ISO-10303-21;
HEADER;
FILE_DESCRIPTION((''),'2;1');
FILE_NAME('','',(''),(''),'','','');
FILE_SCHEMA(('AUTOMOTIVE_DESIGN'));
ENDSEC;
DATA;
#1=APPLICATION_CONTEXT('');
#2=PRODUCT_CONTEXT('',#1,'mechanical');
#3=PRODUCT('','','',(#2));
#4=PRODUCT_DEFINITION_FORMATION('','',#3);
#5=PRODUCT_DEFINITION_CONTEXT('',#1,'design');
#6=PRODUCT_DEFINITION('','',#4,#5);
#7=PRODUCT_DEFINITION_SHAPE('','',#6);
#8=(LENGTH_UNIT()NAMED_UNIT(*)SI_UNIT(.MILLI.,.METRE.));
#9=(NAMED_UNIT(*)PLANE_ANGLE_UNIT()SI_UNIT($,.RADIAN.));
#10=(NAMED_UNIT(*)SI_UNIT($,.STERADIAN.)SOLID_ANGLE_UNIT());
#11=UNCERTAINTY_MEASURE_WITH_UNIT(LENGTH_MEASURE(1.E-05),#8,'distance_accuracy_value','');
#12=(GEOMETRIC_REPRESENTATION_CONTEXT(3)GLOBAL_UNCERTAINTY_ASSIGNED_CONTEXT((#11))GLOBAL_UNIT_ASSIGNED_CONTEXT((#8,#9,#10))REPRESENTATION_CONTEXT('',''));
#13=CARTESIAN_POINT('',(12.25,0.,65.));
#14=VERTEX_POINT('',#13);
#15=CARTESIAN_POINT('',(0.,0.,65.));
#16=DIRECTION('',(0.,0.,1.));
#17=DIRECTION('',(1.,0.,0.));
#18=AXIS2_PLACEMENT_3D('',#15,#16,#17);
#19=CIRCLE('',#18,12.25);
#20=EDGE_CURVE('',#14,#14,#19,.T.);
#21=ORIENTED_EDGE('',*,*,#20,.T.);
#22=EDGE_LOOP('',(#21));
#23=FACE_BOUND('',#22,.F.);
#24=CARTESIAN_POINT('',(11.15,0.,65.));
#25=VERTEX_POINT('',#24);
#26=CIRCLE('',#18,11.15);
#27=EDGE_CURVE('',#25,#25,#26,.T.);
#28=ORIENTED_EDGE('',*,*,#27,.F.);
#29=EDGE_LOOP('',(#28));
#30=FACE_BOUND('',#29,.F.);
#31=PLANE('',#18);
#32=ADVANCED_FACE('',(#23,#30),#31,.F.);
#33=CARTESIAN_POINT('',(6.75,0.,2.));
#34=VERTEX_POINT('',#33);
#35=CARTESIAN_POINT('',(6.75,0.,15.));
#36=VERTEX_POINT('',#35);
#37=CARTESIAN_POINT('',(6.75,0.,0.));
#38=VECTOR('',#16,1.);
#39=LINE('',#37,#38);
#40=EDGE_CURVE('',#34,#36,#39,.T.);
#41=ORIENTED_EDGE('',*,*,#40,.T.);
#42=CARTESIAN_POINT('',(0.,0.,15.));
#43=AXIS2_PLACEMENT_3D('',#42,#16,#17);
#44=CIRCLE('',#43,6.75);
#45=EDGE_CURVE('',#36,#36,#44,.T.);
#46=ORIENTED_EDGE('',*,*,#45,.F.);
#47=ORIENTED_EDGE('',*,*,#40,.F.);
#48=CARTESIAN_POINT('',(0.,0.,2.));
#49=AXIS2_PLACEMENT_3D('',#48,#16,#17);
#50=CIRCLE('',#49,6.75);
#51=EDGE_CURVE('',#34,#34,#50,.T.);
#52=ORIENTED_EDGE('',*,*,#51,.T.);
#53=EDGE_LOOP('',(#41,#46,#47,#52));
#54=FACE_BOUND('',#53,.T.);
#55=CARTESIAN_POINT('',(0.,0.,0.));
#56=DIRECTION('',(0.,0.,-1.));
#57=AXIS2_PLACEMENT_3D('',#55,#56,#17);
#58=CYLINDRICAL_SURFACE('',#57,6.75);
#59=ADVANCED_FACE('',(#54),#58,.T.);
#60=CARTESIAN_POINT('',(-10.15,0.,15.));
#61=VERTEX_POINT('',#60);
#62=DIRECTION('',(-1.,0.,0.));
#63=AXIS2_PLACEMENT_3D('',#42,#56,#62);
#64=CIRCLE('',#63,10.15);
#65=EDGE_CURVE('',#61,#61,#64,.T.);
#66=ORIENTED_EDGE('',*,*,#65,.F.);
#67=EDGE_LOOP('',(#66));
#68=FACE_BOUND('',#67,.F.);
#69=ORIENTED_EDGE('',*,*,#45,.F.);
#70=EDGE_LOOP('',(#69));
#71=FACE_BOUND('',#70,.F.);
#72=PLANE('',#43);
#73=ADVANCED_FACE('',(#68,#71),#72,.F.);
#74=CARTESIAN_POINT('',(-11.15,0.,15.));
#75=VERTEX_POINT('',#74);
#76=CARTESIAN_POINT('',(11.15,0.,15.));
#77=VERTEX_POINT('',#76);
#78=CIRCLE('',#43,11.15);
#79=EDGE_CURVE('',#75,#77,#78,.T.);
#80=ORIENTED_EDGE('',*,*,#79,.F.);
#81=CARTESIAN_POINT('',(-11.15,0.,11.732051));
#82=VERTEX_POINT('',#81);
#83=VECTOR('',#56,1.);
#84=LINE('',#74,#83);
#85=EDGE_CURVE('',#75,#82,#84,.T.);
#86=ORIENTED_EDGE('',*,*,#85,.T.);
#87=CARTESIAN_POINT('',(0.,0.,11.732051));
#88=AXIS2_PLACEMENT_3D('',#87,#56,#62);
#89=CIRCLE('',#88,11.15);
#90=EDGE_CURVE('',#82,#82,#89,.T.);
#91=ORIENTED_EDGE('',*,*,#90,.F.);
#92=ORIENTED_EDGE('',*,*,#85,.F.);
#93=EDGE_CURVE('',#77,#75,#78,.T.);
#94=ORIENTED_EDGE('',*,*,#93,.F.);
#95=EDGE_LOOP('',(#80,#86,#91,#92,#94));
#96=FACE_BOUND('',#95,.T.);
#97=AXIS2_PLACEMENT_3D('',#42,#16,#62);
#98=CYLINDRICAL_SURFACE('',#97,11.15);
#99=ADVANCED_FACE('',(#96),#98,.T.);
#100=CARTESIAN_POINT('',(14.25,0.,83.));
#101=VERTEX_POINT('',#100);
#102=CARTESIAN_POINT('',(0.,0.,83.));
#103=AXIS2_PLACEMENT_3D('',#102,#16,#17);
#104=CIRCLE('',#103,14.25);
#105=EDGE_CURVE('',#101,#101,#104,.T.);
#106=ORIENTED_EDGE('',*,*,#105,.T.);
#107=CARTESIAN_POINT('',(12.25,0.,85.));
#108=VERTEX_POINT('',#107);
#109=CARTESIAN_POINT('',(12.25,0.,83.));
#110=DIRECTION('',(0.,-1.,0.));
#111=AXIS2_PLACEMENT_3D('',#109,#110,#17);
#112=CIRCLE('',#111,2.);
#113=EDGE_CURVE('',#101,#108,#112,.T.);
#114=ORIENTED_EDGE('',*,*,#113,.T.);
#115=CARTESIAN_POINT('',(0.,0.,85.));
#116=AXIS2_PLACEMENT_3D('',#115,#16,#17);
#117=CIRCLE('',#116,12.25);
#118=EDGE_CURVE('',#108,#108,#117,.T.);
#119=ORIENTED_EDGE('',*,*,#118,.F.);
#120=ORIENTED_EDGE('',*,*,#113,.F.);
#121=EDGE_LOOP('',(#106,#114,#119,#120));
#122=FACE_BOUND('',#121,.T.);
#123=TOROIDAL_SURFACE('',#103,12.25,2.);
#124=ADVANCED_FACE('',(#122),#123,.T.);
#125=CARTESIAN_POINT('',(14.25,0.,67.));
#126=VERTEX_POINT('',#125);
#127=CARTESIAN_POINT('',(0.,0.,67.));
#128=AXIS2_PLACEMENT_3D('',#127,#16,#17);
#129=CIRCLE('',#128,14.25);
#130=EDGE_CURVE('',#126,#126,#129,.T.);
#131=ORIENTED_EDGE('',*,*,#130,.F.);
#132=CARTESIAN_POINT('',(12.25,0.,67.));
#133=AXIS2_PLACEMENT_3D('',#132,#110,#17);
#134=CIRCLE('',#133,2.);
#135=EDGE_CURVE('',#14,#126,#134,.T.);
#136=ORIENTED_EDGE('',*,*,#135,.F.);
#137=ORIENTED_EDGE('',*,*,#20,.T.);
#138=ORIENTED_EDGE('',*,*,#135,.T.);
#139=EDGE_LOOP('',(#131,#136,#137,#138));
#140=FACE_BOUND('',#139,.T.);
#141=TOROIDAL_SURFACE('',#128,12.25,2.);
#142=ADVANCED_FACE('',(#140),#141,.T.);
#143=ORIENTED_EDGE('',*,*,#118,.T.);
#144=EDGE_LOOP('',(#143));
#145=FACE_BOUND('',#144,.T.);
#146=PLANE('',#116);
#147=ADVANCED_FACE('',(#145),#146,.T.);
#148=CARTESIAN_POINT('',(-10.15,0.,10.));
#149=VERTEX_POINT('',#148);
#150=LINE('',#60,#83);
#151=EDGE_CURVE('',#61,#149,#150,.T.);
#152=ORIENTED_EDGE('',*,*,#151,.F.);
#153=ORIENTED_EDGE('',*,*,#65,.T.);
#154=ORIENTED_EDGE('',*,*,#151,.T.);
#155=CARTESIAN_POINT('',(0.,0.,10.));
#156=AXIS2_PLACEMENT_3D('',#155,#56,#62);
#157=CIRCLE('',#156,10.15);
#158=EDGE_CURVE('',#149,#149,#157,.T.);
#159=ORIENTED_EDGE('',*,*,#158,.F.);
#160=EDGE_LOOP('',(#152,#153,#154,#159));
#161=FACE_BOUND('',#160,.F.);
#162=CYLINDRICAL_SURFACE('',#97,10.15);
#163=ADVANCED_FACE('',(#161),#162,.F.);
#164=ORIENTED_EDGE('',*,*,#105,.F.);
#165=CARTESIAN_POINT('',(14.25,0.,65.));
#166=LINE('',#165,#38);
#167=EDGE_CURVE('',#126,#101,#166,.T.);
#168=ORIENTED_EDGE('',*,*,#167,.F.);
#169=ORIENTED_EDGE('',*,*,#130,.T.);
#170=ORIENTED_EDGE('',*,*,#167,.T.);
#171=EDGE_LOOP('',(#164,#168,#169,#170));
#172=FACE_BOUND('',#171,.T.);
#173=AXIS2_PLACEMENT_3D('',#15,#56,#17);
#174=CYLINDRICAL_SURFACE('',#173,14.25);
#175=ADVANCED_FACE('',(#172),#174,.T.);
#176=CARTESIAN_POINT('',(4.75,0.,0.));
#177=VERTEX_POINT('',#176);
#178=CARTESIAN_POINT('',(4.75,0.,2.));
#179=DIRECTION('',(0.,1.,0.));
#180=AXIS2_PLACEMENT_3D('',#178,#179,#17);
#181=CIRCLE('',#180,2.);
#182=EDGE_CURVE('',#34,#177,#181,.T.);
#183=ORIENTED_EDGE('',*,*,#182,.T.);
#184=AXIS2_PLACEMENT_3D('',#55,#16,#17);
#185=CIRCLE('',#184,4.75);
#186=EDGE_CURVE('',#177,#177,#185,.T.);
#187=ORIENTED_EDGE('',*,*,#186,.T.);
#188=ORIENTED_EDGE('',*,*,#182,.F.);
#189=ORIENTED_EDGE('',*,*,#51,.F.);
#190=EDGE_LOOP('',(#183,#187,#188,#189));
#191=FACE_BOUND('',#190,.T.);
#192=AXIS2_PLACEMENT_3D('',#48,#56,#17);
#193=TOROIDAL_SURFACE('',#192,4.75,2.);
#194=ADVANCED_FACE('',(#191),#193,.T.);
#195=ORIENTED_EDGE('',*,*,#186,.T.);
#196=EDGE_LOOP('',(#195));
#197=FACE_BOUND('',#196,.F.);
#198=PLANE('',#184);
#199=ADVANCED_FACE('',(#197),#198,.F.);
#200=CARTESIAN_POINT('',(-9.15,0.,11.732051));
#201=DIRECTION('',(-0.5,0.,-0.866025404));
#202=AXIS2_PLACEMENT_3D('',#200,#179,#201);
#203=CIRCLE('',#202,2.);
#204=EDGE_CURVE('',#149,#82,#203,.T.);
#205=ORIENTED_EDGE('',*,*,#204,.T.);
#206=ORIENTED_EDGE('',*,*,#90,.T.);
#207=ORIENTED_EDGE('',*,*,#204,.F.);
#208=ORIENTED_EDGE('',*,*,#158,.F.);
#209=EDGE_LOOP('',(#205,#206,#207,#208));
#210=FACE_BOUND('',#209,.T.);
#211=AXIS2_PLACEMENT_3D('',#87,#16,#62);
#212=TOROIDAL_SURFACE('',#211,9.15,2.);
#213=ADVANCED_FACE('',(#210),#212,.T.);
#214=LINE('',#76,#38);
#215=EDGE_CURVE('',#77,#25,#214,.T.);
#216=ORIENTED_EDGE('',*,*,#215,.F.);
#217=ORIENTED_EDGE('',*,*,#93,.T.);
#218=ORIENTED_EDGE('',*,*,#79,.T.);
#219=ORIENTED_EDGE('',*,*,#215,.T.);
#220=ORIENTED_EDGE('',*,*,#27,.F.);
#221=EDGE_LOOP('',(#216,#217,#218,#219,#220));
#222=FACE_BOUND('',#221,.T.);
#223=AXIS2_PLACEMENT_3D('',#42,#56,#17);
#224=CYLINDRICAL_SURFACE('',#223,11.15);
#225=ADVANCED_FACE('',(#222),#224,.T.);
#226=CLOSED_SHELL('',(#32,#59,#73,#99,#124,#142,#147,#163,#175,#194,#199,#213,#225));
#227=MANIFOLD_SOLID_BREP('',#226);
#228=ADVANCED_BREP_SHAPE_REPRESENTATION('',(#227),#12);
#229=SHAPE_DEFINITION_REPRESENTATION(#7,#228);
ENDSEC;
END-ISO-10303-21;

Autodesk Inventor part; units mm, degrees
ref_plane "YZ Plane" through (0, 0, 0) normal (1, 0, 0) x (0, 1, 0)
ref_plane "XZ Plane" through (0, 0, 0) normal (0, 1, 0) x (-1, 0, 0)
ref_plane "XY Plane" through (0, 0, 0) normal (0, 0, 1) x (1, 0, 0)
sketch "Sketch1" plane through (0, 0, 0) normal (0, 0, 1) x (1, 0, 0)
  circle A0 centre (0, 0) radius 6.75
  dimension "d0" = 13.5
extrude "Extrusion1" add sketch "Sketch1" along normal blind 15
sketch "Sketch2" plane through (0, 0, 15) normal (0, 0, 1) x (1, 0, 0)
  circle A0 centre (0, 0) radius 11.15
  dimension "d3" = 22.3
extrude "Extrusion3" add sketch "Sketch2" along normal blind 50
sketch "Sketch3" plane through (0, 0, 15) normal (0, 0, -1) x (-1, 0, 0)
  circle A0 centre (0, 0) radius 10.15
  circle A1 centre (0, 0) radius 11.15
  dimension "d8" = 20.3
  dimension "d9" = 22.3
extrude "Extrusion4" add sketch "Sketch3" along normal blind 5
sketch "Sketch4" plane through (0, 0, 65) normal (0, 0, 1) x (1, 0, 0)
  circle A0 centre (0, 0) radius 14.25
  dimension "d12" = 28.5
extrude "Extrusion5" add sketch "Sketch4" along normal blind 20
fillet "Fillet1" radius 2 1 edges at (-14.25, 0, 85)
fillet "Fillet2" radius 2 1 edges at (-6.75, 0, 0)
fillet "Fillet3" radius 2 1 edges at (11.15, 0, 10)
fillet "Fillet4" radius 2 1 edges at (-14.25, 0, 65)
properties part number "Elbow_Parallel_Rod_V1"
